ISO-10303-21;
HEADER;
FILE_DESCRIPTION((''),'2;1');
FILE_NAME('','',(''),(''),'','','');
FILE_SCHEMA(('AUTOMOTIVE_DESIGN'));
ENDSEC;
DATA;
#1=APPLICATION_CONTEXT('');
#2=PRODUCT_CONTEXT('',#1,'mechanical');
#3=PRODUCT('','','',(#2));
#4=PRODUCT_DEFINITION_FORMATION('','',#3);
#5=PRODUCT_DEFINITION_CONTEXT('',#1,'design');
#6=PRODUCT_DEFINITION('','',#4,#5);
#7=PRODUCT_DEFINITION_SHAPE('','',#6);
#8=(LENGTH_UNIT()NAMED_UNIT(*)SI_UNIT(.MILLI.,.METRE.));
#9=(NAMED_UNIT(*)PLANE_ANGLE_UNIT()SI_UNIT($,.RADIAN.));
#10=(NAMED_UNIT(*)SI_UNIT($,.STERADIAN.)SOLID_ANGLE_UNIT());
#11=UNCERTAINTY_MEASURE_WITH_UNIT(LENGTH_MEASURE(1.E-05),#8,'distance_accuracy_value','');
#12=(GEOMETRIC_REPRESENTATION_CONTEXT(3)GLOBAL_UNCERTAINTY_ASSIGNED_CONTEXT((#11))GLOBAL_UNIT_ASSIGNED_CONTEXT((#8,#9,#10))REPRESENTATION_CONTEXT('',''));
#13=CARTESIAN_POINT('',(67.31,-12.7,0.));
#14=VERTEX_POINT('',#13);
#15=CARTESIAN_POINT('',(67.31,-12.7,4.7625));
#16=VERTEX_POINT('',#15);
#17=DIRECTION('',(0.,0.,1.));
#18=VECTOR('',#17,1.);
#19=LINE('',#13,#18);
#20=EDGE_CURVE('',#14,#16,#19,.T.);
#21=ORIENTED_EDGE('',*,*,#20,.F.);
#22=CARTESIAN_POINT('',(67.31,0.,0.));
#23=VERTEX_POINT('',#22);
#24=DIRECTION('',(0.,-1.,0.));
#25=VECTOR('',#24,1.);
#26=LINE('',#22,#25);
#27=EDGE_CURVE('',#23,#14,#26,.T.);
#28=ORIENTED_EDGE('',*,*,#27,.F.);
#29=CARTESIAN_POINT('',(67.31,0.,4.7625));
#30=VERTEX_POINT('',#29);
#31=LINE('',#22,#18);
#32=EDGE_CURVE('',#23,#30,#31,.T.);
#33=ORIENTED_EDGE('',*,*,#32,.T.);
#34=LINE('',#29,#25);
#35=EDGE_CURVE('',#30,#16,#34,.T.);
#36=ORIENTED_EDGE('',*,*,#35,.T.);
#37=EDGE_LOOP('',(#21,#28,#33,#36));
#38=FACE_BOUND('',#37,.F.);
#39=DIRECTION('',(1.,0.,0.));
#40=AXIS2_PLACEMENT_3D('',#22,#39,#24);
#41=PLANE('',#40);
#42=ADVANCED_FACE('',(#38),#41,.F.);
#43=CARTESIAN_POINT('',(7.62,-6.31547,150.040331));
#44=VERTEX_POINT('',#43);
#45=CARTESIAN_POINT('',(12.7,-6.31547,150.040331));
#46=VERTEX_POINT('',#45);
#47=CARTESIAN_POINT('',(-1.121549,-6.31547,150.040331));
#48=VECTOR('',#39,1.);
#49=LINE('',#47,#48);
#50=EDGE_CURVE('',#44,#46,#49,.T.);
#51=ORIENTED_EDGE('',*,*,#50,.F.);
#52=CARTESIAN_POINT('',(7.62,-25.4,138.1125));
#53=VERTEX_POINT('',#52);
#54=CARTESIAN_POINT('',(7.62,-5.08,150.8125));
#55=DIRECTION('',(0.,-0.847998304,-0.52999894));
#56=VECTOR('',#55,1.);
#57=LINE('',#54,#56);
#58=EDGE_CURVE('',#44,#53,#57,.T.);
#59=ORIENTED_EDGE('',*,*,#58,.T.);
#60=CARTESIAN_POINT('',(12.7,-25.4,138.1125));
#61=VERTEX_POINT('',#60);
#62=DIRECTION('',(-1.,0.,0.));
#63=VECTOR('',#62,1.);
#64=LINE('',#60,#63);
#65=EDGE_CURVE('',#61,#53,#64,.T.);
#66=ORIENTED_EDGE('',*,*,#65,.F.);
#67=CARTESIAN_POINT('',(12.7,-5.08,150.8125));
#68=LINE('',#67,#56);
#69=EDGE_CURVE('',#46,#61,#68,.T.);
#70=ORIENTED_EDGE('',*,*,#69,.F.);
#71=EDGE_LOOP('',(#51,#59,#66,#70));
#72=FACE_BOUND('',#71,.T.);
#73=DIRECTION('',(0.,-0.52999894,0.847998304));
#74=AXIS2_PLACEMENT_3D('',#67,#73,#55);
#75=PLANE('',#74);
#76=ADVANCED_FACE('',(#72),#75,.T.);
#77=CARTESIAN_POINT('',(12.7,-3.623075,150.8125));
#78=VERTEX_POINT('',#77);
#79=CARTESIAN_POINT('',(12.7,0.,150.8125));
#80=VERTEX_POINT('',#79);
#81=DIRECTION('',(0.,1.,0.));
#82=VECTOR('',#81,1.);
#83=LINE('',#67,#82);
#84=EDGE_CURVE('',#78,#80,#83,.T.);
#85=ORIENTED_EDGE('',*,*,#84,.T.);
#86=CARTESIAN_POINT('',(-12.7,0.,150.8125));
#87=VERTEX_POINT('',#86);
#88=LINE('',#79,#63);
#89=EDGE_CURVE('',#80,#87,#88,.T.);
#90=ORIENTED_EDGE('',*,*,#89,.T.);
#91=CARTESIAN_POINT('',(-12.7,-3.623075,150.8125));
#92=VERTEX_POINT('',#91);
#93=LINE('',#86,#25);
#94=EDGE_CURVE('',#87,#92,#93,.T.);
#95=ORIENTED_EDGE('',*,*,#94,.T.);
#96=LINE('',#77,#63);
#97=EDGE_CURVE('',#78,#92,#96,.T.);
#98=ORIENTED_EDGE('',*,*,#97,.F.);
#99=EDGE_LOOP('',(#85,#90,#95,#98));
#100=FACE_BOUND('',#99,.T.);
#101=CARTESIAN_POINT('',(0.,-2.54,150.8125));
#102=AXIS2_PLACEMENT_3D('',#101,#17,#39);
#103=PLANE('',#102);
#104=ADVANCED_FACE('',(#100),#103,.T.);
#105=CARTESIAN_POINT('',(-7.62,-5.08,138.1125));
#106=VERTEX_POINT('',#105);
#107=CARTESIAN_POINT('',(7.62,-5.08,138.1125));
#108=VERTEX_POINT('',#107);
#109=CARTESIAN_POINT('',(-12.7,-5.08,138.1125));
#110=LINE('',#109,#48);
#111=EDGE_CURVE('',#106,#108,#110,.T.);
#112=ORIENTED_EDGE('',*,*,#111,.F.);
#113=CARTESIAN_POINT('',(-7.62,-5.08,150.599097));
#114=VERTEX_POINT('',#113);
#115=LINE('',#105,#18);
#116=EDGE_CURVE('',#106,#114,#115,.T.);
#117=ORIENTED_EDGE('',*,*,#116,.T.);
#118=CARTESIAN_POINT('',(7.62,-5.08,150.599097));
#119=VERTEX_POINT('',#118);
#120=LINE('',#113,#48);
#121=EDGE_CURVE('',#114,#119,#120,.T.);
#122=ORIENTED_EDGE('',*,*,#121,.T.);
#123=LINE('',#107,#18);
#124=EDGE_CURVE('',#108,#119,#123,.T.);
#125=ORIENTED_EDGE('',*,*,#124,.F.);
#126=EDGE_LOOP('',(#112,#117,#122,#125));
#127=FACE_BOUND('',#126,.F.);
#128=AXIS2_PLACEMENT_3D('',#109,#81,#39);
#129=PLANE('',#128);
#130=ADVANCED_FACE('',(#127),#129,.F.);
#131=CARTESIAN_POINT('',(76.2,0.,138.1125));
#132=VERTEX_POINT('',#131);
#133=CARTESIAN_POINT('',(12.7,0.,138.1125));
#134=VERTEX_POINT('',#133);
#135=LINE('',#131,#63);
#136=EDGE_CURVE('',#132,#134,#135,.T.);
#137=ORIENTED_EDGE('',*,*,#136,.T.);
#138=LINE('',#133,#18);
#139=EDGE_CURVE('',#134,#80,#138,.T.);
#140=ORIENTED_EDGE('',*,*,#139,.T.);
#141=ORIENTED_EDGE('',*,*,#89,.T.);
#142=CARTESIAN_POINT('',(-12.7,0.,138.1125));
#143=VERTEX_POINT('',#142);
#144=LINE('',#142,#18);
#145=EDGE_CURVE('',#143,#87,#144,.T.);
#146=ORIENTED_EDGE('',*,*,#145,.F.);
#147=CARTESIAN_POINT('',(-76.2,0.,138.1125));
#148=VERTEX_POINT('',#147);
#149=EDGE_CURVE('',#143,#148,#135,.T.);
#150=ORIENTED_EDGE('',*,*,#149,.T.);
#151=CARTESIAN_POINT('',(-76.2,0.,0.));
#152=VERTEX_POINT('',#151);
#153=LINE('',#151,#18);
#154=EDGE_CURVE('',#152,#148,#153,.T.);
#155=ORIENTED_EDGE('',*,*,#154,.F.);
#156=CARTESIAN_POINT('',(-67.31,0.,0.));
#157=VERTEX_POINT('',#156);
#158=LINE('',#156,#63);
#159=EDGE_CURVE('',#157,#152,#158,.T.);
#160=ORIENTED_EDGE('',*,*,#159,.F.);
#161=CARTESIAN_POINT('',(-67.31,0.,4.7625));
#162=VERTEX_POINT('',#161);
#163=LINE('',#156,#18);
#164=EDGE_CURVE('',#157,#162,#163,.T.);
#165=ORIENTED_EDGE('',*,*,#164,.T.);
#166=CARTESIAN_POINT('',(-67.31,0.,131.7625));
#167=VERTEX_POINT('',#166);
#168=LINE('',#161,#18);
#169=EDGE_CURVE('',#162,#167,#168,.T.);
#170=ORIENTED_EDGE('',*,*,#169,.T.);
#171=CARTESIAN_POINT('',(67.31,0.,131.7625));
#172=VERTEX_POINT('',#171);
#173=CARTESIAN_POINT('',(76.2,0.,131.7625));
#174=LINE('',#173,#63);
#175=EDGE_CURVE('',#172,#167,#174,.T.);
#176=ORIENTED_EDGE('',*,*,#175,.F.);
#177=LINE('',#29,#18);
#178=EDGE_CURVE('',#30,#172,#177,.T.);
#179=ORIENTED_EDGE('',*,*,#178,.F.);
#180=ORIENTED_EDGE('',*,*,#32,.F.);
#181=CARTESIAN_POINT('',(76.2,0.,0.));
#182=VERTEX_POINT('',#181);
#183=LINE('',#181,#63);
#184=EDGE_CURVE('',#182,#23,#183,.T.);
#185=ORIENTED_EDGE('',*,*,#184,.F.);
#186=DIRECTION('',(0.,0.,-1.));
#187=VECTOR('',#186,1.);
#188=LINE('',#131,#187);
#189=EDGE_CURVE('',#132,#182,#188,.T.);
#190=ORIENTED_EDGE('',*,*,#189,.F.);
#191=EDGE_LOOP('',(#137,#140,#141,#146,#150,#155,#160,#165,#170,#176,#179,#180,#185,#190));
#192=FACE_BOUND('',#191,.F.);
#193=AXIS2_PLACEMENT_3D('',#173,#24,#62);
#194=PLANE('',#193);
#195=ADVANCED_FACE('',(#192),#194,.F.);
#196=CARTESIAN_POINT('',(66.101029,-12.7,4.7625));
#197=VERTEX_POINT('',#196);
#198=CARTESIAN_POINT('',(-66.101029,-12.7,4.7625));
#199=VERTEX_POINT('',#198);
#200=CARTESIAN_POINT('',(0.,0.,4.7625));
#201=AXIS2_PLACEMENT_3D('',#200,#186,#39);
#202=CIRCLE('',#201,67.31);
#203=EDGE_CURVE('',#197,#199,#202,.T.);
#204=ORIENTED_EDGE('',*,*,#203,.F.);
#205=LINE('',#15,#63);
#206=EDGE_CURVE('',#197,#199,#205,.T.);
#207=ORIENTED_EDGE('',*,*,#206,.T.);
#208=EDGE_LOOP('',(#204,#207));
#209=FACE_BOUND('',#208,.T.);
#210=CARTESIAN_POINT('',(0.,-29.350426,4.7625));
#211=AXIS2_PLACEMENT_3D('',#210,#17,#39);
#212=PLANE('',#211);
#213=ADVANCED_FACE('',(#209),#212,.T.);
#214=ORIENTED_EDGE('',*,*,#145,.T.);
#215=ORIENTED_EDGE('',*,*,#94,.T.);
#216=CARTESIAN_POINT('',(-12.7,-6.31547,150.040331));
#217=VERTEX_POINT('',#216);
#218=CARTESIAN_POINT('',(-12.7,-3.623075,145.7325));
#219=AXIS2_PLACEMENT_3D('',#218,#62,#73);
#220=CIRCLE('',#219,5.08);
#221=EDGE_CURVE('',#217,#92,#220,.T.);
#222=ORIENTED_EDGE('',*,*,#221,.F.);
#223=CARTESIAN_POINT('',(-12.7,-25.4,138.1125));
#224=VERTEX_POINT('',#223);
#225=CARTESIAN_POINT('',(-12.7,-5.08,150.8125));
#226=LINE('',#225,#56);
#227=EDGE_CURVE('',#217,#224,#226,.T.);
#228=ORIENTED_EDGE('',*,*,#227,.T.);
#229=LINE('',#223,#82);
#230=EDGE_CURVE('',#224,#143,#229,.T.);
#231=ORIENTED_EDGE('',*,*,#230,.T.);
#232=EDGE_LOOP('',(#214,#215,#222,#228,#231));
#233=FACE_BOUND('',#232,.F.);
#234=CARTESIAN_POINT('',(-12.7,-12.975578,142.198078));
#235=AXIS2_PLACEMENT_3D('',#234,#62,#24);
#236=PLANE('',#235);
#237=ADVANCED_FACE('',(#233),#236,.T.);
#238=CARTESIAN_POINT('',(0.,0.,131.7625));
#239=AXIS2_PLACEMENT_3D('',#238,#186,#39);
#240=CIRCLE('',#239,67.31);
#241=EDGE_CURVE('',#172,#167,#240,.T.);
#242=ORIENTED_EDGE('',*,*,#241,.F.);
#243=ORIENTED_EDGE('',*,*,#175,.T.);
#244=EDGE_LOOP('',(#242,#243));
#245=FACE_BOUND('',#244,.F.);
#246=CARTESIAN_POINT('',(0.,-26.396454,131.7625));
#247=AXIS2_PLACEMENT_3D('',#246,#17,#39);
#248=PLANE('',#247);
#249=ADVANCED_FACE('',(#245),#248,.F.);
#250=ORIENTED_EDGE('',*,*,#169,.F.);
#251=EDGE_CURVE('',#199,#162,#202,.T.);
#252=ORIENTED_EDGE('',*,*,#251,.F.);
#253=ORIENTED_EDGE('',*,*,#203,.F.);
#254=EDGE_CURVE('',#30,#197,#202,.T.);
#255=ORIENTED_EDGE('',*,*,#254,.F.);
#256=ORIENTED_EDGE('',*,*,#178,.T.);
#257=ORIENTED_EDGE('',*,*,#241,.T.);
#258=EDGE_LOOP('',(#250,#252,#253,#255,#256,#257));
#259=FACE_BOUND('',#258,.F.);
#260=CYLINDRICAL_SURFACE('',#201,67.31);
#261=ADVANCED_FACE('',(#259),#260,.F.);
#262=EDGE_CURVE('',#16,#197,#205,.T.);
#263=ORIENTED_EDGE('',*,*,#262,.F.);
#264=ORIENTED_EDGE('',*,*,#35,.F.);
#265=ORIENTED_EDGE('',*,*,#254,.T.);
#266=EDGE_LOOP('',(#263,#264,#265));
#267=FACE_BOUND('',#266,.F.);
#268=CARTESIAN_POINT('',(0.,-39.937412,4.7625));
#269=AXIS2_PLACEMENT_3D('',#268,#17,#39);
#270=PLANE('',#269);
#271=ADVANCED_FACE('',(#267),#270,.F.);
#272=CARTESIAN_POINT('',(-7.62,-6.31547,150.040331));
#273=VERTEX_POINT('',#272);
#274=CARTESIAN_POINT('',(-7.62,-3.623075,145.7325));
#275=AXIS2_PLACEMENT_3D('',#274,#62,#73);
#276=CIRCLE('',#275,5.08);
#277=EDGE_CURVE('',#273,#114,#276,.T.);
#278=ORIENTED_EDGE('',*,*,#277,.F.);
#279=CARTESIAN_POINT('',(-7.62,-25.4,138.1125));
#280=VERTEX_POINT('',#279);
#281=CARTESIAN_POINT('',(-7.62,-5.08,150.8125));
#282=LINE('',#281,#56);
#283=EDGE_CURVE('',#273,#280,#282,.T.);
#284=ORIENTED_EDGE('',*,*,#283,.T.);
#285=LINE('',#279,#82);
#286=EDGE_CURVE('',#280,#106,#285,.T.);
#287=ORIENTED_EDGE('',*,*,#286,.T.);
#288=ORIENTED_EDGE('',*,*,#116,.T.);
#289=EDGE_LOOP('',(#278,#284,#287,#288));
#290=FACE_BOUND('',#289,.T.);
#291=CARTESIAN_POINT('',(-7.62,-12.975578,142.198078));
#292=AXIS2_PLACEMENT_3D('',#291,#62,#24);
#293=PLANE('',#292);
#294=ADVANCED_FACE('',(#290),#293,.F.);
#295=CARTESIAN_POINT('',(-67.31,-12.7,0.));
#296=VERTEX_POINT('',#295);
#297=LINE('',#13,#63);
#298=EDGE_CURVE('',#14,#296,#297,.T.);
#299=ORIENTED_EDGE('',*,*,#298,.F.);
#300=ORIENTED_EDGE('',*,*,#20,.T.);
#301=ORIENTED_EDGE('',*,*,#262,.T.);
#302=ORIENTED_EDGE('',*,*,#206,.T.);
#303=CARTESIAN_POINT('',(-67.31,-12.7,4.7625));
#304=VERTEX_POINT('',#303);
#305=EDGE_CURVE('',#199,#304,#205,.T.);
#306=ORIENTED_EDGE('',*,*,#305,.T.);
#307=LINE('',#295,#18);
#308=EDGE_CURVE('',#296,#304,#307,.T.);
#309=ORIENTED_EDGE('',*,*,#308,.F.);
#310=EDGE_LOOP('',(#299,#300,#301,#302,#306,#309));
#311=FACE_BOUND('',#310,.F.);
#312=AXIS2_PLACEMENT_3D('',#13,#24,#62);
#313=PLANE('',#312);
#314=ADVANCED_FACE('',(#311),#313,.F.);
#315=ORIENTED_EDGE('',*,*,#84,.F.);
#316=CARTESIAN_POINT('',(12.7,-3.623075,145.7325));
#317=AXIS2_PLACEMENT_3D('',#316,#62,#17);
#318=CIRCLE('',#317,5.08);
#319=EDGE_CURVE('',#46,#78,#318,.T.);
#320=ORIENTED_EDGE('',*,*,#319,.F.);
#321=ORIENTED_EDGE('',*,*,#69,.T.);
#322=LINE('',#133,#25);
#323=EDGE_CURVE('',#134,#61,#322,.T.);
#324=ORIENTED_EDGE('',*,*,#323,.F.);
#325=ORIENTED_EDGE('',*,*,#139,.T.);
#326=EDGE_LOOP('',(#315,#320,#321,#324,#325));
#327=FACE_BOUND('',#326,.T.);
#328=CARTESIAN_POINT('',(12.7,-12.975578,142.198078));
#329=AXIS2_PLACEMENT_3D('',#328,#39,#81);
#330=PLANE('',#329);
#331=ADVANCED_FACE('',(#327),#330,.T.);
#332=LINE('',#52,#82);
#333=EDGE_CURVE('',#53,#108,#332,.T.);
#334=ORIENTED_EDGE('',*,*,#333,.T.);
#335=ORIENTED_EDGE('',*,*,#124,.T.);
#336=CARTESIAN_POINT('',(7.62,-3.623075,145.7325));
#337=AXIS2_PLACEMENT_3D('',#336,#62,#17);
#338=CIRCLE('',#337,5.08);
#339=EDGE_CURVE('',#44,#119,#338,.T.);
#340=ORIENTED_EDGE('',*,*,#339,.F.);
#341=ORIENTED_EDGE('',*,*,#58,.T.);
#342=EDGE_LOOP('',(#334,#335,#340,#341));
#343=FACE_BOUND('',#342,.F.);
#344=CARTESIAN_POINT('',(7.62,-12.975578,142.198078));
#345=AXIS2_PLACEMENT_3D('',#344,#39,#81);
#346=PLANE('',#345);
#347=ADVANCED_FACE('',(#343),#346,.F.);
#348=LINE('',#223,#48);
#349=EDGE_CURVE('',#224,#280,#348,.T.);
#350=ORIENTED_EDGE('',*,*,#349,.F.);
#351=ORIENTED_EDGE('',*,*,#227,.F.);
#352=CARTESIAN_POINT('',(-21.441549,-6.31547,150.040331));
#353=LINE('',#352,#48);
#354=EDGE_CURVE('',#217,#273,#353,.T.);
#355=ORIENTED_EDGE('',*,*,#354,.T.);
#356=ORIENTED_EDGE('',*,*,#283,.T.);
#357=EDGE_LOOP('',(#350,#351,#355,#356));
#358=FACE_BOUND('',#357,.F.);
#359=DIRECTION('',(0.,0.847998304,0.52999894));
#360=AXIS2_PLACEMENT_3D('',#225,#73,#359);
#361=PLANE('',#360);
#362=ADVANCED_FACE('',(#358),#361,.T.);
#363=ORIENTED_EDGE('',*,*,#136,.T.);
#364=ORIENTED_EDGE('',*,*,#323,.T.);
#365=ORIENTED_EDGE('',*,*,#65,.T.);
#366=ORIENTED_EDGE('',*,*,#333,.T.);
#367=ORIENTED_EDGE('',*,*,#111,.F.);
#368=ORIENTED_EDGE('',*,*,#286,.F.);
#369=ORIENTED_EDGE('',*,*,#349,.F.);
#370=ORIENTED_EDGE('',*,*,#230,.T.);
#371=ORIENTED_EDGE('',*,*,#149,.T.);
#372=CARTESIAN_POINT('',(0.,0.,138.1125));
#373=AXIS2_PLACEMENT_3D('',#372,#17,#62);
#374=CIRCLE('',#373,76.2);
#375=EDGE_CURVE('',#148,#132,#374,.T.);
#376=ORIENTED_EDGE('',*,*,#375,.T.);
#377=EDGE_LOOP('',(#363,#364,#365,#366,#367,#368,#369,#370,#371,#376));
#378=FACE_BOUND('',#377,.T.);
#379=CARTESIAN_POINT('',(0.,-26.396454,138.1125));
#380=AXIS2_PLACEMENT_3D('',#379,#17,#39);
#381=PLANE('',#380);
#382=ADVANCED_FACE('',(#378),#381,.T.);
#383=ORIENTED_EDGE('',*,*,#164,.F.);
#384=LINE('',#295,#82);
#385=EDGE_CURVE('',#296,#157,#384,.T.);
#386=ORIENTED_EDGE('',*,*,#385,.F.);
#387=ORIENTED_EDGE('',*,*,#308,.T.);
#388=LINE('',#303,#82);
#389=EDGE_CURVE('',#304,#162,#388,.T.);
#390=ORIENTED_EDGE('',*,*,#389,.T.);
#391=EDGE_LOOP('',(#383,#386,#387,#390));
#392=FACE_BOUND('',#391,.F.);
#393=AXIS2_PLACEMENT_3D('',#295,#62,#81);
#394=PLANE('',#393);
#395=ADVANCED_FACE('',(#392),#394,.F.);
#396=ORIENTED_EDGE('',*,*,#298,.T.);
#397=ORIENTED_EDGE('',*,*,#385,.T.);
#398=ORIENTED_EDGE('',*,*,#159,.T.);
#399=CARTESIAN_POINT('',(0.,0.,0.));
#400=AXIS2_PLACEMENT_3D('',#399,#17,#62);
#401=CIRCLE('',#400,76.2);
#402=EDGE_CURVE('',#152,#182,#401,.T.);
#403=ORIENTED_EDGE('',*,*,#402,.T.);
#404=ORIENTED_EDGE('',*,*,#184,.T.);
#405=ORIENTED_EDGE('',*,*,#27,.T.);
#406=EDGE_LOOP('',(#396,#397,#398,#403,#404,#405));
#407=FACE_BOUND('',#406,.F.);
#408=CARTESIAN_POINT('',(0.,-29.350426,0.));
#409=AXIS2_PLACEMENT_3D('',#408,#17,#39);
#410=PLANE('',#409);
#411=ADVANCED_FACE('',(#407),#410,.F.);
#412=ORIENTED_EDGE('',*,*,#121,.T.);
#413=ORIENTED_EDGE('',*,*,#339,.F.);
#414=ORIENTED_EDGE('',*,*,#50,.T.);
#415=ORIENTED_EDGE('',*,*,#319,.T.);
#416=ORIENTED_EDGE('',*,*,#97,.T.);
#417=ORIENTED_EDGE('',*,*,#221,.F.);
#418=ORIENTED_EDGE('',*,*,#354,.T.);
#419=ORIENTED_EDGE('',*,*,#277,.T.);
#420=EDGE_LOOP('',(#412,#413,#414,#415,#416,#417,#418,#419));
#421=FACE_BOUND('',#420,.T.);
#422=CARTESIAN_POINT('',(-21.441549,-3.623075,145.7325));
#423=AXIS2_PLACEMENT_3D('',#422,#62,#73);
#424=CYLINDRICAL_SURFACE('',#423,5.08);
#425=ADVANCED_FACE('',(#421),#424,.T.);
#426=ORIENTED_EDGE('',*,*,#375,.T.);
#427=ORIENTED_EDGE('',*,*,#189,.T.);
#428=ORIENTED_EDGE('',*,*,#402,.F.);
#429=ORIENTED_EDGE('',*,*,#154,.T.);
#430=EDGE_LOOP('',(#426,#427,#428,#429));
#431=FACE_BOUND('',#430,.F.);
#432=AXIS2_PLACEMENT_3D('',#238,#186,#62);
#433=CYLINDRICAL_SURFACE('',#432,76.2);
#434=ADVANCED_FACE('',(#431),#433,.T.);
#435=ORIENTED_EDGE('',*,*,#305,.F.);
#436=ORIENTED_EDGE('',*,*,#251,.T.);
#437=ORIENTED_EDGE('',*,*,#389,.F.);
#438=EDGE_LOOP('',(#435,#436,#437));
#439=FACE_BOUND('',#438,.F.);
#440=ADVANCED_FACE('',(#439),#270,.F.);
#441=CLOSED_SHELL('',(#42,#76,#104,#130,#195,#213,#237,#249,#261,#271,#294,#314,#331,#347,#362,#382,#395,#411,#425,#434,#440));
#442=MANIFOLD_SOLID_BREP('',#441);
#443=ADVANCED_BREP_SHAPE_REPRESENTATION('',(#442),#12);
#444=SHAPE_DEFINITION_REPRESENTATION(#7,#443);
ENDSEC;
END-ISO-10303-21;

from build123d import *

# Parameters (mm, degrees)
F1_DEPTH     = 4.7625
F3_DEPTH     = 127
F5_DEPTH     = 6.35
F7_DEPTH     = 12.7
F9_DEPTH     = 5.08
F10_T1_DEPTH = 22.563097962
F10_T3_DEPTH = 22.563097962


# Not quite as in the source:
# - a fillet or chamfer that OpenCascade refuses, or shapes differently, is made with other operations: its cross-section is extruded or revolved along the edge and cut away or added
# - a length typed as a fraction of an inch, garbled in the dataset ("3 / 203.2 mm" for 3/8 in), is restored
# - a pattern or mirror of a feature is missing from the dataset's text; its kind, count and spacing are read off the source's solid


with BuildPart() as f1:
    # F0 (on Top) → F1 (new body)
    with BuildSketch(Plane.XY):
        with BuildLine():
            ThreePointArc((-76.2, 0), (0, -76.2), (76.2, 0))
            Line((76.2, 0), (67.31, 0))
            Line((67.31, 0), (67.31, -12.7))
            Line((67.31, -12.7), (-67.31, -12.7))
            Line((-67.31, -12.7), (-67.31, 0))
            Line((-67.31, 0), (-76.2, 0))
        make_face()
    extrude(amount=F1_DEPTH)

    # F2 (on face) → F3 (join)
    with BuildSketch(Plane.XY.offset(4.7625)):
        with BuildLine():
            Line((-67.31, 0), (-76.2, 0))
            ThreePointArc((-76.2, 0), (0, -76.2), (76.2, 0))
            Line((76.2, 0), (67.31, 0))
            ThreePointArc((67.31, 0), (0, -67.31), (-67.31, 0))
        make_face()
    extrude(amount=F3_DEPTH)

    # F4 (on face) → F5 (join)
    with BuildSketch(Plane.XY.offset(131.7625)):
        with BuildLine():
            Line((76.2, 0), (-76.2, 0))
            ThreePointArc((-76.2, 0), (0, -76.2), (76.2, 0))
        make_face()
    extrude(amount=F5_DEPTH)

    # F6 (on face) → F7 (join)
    with BuildSketch(Plane.XY.offset(138.1125)):
        Polygon((12.7, 0), (0, 0), (-12.7, 0), (-12.7, -5.08), (0, -5.08), (12.7, -5.08), align=None)
    extrude(amount=F7_DEPTH)

    # F8 (on face) → F9 (join)
    with BuildSketch(Plane.YZ.offset(12.7)):
        Polygon((-5.08, 150.8125), (-25.4, 138.1125), (-5.08, 138.1125), align=None)
    f9 = extrude(amount=-F9_DEPTH)

    # F9_copies: F9 across plane
    add(f9.mirror(Plane(origin=(0, 0, 0), x_dir=(0, 0, -1), z_dir=(-1, 0, 0))))

    # F10: fillet of radius 5.08 on 2 edges, made by hand

    # F10_s2 → F10_t1 (cut)
    with BuildSketch(Plane.YZ.offset(-21.441548981)):
        with BuildLine():
            ThreePointArc((-6.315469785, 150.0403313843), (-5.0235423361, 150.6156436305), (-3.6230751698, 150.8125))
            Line((-3.6230751698, 150.8125), (-3.6230751698, 150.9141))
            Line((-3.6230751698, 150.9141), (-5.1091384966, 150.9141))
            Line((-5.1091384966, 150.9141), (-6.3693176774, 150.126488012))
            Line((-6.3693176774, 150.126488012), (-6.315469785, 150.0403313843))
        make_face()
    extrude(amount=F10_T1_DEPTH, mode=Mode.SUBTRACT)

    # F10_s4 → F10_t3 (cut)
    with BuildSketch(Plane.YZ.offset(-1.121548981)):
        with BuildLine():
            ThreePointArc((-3.6230751698, 150.8125), (-5.0235423361, 150.6156436305), (-6.315469785, 150.0403313843))
            Line((-6.315469785, 150.0403313843), (-6.3693176774, 150.126488012))
            Line((-6.3693176774, 150.126488012), (-5.1091384966, 150.9141))
            Line((-5.1091384966, 150.9141), (-3.6230751698, 150.9141))
            Line((-3.6230751698, 150.9141), (-3.6230751698, 150.8125))
        make_face()
    extrude(amount=F10_T3_DEPTH, mode=Mode.SUBTRACT)


solid = f1.part
